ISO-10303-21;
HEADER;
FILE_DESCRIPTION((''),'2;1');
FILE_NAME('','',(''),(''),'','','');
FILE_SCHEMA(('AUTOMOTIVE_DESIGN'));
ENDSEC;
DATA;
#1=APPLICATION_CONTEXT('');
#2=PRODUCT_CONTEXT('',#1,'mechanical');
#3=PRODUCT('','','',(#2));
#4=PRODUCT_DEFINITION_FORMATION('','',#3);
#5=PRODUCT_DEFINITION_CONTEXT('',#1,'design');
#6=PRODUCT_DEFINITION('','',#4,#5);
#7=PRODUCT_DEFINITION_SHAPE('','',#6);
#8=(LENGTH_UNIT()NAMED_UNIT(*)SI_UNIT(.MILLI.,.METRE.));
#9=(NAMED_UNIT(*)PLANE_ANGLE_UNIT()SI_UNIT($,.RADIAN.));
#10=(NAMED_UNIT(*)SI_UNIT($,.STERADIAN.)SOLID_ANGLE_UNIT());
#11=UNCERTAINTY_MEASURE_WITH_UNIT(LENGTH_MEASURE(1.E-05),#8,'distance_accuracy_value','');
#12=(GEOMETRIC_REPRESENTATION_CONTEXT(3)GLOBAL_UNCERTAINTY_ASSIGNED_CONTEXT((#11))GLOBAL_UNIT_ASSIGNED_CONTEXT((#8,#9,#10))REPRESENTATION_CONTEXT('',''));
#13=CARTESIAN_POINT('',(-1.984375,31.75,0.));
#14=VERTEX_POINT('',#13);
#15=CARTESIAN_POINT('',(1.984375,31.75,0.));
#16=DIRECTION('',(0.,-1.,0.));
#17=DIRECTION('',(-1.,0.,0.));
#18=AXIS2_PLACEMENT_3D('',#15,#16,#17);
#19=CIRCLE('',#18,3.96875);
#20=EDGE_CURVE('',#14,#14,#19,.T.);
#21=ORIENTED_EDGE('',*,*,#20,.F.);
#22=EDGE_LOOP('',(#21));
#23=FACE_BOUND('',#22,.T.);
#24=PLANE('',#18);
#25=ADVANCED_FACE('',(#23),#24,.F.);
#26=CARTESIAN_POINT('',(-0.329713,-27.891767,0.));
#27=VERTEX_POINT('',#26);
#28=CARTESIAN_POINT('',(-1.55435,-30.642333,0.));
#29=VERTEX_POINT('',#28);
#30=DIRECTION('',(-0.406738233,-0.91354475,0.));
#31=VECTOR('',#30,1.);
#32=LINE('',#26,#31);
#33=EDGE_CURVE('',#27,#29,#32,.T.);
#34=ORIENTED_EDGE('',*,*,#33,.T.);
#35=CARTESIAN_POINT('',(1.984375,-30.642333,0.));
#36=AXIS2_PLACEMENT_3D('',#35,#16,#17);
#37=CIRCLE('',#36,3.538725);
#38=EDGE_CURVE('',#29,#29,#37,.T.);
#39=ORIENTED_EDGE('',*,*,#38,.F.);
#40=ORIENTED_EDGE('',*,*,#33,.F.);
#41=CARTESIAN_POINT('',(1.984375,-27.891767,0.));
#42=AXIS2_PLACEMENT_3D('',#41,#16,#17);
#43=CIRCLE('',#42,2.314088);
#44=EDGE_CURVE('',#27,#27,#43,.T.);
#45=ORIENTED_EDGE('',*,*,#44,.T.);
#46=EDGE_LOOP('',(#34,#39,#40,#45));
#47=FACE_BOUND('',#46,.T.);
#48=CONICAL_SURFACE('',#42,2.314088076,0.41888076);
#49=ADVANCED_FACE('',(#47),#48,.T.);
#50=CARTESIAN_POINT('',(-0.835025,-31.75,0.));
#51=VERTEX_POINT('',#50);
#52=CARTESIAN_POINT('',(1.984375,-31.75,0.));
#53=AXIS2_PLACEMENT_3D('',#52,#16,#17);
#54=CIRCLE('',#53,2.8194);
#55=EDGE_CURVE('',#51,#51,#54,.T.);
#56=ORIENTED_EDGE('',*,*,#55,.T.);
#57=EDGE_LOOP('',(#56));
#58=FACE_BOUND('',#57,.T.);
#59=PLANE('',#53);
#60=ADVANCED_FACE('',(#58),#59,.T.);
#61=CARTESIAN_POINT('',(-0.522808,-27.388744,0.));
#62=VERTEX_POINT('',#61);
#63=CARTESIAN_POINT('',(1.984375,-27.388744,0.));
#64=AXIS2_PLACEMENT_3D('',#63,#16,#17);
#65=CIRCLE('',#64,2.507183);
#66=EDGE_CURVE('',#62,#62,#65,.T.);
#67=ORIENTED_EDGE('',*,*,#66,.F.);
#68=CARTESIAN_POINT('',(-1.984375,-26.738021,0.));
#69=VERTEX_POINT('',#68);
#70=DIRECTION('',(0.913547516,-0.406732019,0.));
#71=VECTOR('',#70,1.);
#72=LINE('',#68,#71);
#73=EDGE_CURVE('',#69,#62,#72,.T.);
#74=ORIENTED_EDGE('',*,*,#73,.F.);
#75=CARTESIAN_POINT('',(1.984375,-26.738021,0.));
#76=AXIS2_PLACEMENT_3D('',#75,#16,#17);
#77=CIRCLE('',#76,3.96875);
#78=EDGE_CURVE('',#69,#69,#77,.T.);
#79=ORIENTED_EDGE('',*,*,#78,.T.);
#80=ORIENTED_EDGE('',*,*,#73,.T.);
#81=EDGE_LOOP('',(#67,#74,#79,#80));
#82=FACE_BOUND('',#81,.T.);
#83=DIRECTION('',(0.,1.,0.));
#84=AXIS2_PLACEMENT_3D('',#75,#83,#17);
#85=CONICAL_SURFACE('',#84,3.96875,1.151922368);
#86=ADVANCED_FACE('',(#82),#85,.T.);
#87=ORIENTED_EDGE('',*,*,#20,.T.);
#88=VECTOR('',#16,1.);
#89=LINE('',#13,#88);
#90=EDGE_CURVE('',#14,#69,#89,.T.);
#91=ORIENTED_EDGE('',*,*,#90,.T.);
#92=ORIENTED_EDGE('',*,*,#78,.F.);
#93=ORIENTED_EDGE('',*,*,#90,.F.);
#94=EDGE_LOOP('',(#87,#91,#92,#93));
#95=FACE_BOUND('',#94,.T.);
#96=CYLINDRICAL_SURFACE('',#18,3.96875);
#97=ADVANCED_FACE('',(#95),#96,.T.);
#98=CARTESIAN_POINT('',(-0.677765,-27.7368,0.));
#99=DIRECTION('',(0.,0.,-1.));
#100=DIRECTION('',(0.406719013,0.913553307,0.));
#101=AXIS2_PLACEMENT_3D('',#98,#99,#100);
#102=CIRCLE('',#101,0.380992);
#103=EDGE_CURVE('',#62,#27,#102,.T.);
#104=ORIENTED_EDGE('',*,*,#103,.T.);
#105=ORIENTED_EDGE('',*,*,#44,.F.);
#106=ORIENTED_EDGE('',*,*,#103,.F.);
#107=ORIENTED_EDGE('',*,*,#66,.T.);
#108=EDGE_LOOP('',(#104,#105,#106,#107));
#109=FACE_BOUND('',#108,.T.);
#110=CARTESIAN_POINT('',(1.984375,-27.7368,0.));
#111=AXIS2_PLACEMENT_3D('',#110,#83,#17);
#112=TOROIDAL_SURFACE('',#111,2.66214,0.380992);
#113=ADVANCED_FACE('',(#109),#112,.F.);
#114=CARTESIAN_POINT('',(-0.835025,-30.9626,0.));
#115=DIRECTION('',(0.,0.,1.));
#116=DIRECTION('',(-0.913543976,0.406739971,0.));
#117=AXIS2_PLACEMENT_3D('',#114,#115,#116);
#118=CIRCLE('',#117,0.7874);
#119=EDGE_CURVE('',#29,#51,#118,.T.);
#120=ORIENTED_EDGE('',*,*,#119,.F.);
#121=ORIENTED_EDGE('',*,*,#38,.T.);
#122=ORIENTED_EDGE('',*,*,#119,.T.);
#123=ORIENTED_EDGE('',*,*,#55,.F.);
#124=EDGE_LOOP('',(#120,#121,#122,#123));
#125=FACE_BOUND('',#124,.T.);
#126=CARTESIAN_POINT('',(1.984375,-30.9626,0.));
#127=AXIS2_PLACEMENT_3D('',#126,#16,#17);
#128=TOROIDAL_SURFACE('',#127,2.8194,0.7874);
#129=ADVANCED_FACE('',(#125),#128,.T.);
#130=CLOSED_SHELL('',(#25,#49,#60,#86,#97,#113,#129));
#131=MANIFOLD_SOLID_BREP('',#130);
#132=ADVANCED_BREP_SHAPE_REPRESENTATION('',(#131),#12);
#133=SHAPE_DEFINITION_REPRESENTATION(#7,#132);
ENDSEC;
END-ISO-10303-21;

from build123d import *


# Not quite as in the source:
# - ends of sketch curves that miss each other by under 0.0002 mm in the source are joined


with BuildPart() as f2:
    # F1 (on Top) → F2 (revolve)
    with BuildSketch(Plane.XY):
        with BuildLine():
            ThreePointArc((-1.5543495265, -30.6423329465), (-1.4953949864, -31.3914475732), (-0.835025, -31.75))
            Line((-0.835025, -31.75), (1.984375, -31.75))
            Line((1.984375, -31.75), (1.984375, 31.75))
            Line((1.984375, 31.75), (-1.984375, 31.75))
            Line((-1.984375, 31.75), (-1.984375, -26.7380212))
            Line((-1.984375, -26.7380212), (-0.5228082, -27.3887438))
            ThreePointArc((-0.5228082, -27.3887438), (-0.322079197, -27.6002624898), (-0.3297130763, -27.8917673251))
            Line((-0.3297130763, -27.8917673251), (-1.5543495265, -30.6423329465))
        make_face()
    revolve(axis=Axis((1.984375, 0, 0), (0, -1, 0)))


solid = f2.part
